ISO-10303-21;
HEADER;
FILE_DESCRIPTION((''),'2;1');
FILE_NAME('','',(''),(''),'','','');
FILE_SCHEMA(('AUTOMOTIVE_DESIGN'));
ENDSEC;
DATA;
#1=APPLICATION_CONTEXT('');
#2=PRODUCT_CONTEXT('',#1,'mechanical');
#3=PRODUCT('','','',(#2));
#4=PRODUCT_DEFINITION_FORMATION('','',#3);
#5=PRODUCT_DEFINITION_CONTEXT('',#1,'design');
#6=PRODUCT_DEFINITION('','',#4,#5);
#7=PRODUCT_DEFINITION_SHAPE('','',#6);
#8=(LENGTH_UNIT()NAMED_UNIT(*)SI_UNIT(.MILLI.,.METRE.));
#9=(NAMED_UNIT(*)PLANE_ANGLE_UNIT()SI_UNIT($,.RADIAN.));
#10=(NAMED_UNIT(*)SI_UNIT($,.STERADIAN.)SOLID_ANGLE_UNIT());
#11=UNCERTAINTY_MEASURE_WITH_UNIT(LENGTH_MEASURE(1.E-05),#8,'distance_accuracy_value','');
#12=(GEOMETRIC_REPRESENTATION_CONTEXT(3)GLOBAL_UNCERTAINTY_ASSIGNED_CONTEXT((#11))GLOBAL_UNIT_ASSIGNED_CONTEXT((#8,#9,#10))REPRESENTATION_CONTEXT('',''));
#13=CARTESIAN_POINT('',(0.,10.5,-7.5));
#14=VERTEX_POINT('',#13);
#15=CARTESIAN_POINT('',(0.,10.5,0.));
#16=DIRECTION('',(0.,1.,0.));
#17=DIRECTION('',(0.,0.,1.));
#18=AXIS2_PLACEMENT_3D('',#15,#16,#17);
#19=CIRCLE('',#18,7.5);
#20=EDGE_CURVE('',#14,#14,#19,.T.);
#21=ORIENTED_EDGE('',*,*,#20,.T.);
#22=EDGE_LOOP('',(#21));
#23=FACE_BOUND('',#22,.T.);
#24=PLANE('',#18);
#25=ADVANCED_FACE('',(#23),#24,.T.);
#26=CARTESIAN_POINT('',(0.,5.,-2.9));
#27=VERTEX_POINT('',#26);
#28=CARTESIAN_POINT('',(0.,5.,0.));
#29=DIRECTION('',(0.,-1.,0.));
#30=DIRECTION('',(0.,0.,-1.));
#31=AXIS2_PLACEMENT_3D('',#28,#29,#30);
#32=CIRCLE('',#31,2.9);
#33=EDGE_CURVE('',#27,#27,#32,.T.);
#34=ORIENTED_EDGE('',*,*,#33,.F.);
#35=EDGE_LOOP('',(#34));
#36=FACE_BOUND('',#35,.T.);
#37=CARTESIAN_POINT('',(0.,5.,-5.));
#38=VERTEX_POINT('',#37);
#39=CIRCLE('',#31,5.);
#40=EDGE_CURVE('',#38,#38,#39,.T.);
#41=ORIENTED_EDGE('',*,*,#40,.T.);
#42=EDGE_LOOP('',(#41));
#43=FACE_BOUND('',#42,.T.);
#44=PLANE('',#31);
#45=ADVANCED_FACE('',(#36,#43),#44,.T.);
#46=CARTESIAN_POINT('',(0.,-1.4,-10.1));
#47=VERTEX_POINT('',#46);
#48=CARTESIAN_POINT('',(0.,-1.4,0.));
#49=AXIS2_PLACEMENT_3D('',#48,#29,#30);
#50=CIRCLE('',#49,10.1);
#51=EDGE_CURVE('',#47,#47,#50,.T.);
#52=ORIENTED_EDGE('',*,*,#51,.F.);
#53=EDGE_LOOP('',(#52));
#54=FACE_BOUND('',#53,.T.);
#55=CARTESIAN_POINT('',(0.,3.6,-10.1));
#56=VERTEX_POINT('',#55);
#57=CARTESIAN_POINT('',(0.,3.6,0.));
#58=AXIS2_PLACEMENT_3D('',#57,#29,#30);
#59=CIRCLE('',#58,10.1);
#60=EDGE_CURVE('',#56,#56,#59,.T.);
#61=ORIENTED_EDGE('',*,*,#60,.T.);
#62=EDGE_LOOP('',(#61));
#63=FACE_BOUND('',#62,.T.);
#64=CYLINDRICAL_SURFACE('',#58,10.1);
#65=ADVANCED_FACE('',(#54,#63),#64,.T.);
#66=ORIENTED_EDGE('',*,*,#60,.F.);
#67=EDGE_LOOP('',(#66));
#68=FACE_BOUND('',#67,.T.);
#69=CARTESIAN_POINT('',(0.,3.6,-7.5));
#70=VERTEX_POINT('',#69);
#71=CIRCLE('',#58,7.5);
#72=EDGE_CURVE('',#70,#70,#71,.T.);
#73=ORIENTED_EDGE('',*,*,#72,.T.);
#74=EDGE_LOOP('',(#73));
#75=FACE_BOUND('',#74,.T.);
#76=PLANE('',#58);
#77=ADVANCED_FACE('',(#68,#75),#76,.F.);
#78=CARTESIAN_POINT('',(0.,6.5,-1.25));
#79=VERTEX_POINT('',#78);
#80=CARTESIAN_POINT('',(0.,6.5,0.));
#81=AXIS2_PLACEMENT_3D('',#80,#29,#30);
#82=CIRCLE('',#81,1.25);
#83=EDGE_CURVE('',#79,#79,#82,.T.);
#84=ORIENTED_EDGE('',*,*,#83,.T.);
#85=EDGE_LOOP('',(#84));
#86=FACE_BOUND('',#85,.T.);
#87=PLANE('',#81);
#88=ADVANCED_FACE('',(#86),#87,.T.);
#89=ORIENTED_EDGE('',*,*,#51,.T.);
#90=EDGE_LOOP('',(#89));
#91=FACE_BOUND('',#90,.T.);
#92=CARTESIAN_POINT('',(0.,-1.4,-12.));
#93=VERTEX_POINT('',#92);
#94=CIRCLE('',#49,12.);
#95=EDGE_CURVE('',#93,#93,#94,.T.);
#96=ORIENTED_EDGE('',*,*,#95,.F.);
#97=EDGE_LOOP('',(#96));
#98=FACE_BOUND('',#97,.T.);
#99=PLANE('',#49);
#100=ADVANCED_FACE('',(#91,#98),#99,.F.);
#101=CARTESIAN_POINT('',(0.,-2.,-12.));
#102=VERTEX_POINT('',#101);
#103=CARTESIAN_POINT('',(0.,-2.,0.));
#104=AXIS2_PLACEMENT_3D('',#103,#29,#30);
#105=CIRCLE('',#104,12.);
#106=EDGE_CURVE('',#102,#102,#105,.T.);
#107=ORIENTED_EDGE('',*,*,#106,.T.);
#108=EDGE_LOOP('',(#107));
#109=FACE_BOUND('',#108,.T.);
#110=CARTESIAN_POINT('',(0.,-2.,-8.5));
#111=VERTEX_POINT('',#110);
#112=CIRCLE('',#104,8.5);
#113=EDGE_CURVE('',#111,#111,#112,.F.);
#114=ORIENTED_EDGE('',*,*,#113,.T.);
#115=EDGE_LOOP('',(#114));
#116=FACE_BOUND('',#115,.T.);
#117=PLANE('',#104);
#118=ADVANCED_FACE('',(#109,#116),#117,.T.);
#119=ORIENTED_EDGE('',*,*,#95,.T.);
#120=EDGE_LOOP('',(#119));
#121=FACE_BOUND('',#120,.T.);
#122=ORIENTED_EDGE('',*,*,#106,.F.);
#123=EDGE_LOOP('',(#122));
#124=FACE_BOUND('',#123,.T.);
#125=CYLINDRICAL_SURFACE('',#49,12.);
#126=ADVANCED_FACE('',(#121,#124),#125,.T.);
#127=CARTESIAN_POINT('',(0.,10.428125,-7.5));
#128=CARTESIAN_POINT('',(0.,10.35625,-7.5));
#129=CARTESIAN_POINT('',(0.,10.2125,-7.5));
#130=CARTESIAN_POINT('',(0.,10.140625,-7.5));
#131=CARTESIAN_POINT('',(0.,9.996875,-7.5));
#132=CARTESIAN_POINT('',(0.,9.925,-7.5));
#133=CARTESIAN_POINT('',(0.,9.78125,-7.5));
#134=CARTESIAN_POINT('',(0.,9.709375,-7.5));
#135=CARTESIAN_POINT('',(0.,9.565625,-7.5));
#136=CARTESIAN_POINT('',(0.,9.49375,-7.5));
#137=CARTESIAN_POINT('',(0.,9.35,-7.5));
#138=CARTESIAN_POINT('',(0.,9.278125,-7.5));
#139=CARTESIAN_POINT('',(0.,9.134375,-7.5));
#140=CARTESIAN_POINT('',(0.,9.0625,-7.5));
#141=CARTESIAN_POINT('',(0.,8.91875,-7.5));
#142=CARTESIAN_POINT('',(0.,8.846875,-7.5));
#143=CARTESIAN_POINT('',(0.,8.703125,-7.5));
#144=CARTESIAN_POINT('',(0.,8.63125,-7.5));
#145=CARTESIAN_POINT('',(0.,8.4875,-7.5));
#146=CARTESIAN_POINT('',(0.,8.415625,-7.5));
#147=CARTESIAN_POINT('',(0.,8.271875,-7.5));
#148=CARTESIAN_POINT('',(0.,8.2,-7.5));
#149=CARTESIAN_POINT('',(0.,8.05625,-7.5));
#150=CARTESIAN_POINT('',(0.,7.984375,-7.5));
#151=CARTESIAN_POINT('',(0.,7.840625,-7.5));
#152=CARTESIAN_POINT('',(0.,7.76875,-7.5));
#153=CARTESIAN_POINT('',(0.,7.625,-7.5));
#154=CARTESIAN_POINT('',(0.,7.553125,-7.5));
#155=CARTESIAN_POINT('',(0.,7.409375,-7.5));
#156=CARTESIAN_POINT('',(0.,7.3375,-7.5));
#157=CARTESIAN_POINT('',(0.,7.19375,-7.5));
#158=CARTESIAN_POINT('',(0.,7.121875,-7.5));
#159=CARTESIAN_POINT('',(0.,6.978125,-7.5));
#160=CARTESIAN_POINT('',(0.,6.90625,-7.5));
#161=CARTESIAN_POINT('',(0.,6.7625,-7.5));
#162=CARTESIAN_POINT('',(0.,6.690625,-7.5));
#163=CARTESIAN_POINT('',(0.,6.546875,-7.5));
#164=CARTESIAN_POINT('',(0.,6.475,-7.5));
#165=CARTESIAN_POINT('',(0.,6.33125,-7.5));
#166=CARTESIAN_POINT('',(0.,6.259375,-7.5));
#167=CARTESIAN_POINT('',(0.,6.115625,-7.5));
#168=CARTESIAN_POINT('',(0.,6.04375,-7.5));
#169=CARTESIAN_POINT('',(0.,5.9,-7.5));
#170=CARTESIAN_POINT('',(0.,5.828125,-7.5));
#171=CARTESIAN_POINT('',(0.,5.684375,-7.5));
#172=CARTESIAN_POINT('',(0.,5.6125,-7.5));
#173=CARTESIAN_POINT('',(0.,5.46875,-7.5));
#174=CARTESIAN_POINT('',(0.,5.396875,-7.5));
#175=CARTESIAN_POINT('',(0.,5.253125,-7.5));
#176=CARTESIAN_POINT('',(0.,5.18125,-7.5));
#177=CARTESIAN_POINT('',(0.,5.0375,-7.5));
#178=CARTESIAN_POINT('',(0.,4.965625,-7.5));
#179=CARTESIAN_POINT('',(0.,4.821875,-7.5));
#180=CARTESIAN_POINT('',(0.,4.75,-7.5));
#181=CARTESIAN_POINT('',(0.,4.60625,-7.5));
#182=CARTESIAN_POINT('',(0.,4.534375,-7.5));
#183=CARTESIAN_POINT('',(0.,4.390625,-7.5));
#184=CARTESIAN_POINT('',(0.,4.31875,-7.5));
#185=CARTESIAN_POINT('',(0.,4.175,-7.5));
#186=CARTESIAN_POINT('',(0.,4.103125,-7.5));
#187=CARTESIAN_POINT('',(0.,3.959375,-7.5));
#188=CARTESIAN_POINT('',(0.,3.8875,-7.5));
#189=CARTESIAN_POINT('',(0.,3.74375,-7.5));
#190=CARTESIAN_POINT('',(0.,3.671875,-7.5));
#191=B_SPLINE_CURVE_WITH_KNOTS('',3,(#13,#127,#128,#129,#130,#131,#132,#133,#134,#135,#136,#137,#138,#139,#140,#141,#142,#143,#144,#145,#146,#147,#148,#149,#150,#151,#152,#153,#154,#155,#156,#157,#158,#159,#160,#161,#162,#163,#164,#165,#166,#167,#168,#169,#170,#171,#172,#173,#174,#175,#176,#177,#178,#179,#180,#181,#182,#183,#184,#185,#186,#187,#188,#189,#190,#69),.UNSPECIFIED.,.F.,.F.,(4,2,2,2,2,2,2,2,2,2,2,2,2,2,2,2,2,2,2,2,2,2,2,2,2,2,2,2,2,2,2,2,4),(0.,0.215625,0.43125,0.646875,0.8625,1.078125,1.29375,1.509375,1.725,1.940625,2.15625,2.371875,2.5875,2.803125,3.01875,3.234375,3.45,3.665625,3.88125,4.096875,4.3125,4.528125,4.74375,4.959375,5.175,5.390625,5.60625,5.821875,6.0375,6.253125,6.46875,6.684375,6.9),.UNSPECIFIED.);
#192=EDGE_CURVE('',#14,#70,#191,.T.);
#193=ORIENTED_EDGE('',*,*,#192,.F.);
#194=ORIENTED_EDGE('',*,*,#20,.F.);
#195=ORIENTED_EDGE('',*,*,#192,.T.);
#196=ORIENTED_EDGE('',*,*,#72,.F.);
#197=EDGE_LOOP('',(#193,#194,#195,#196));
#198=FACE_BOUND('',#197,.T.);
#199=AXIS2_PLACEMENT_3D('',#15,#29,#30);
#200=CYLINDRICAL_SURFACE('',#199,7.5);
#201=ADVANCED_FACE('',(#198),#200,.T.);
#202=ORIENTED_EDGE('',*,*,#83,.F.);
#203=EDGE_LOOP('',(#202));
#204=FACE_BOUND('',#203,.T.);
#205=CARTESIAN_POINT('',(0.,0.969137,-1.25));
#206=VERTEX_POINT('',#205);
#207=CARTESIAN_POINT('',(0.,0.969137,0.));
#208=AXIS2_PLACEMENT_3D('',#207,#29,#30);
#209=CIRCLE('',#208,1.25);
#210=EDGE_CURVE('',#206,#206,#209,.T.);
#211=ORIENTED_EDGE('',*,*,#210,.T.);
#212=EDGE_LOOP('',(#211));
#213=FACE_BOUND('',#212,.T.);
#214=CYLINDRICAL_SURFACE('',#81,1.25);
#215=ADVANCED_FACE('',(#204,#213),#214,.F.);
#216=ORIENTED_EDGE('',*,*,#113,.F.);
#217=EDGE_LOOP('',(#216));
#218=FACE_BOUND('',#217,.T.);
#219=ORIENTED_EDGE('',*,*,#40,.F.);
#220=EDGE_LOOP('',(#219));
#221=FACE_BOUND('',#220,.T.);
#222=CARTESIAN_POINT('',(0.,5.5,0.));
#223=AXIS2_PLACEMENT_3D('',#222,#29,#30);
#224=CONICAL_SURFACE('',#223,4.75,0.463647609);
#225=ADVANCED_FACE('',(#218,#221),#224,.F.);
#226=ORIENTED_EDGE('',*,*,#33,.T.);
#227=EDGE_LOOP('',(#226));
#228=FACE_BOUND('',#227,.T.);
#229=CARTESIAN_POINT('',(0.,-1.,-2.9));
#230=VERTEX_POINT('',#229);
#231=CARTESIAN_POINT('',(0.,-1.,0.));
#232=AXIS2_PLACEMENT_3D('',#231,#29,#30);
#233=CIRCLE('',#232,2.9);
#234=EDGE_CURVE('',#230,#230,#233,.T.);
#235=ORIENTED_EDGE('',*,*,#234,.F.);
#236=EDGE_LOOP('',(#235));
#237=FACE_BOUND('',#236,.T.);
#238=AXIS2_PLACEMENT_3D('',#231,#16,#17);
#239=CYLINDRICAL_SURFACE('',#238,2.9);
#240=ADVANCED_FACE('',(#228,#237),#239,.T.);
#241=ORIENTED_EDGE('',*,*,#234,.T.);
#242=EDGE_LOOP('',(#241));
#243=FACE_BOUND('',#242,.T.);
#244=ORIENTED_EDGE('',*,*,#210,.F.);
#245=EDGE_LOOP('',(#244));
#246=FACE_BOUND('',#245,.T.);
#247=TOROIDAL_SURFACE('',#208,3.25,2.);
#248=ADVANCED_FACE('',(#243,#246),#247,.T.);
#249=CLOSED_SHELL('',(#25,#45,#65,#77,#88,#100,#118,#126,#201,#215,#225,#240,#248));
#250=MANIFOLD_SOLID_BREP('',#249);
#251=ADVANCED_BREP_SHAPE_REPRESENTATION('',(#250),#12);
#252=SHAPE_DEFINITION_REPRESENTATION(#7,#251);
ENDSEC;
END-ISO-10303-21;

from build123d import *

# Parameters (mm, degrees)
ESQUISSE1_R             = 7.5
BOSS_EXTRU_1_DEPTH      = 10.5
BOSS_EXTRU_2_DEPTH      = 2
BOSS_EXTRU_2_DEPTH_BACK = 3.6
ESQUISSE2_R             = 10.1
ESQUISSE3_R             = 4.75
ENL_V_MAT_EXTRU_2_DEPTH = 6.999999999999999
ESQUISSE4_R             = 2.9
BOSS_EXTRU_3_DEPTH      = 6
CHANFREIN1_SIZE         = 3.75
CHANFREIN1_SIZE_2       = 7.5
ESQUISSE11_R            = 1.25
ENL_V_MAT_EXTRU_4_DEPTH = 7.5
ESQUISSE29_R            = 12
ESQUISSE29_R_2          = 10.1
BOSS_EXTRU_11_DEPTH     = 0.6
CONG_1_R                = 2


with BuildPart() as part:
    # Esquisse1 → Boss.-Extru.1 (new body)
    with BuildSketch(Plane(origin=(0, 0, 0), x_dir=(1, 0, 0), z_dir=(0, 1, 0))):
        with Locations(Location((0, 0, 0), (0, 0, 90))):
            Circle(ESQUISSE1_R)
    extrude(amount=BOSS_EXTRU_1_DEPTH)

    # Esquisse2 → Boss.-Extru.2 (add, two sides: drawn at the far end of the back side and taken through both)
    with BuildSketch(Plane.XZ.offset(-BOSS_EXTRU_2_DEPTH_BACK)):
        with Locations(Location((0, 0, 0), (0, 0, 270))):
            Circle(ESQUISSE2_R)
    extrude(amount=BOSS_EXTRU_2_DEPTH + BOSS_EXTRU_2_DEPTH_BACK)

    # Esquisse3 → Enlèv. mat.-Extru.2 (cut)
    with BuildSketch(Plane.XZ.offset(2)):
        with Locations(Location((0, 0, 0), (0, 0, 270))):
            Circle(ESQUISSE3_R)
    extrude(amount=-ENL_V_MAT_EXTRU_2_DEPTH, mode=Mode.SUBTRACT)

    # Esquisse4 → Boss.-Extru.3 (add)
    with BuildSketch(Plane.XZ.offset(-4.999999999999999)):
        with Locations(Location((0, 0, 0), (0, 0, 270))):
            Circle(ESQUISSE4_R)
    extrude(amount=BOSS_EXTRU_3_DEPTH)

    # Chanfrein1
    # the kernel refuses this chamfer: 7.5, 3.75 mm, written as the material it takes off along each edge
    with BuildSketch(Plane(origin=(0, -2, 0), x_dir=(-1.8e-16, 0, -1), z_dir=(-1, 0, 1.8e-16))) as chanfrein1_piece_1_section:
        Polygon((4.75 + CHANFREIN1_SIZE, 0), (4.75, -CHANFREIN1_SIZE_2), (4.75, 0), align=None)
    chanfrein1_piece_1 = revolve(axis=Axis((0, -2, 0), (0, -1, 0)), mode=Mode.PRIVATE)
    chanfrein1_piece_1 = split(chanfrein1_piece_1, bisect_by=Plane(origin=(2.06e-15, 4.999999999999999, 6.741862305399), z_dir=(0, -1, 0)), keep=Keep.TOP, mode=Mode.PRIVATE)
    add(chanfrein1_piece_1, mode=Mode.SUBTRACT)

    # Esquisse11 → Enlèv. mat.-Extru.4 (cut)
    with BuildSketch(Plane.XZ.offset(1.0000000000000009)):
        with Locations(Location((0, 0, 0), (0, 0, 270))):
            Circle(ESQUISSE11_R)
    extrude(amount=-ENL_V_MAT_EXTRU_4_DEPTH, mode=Mode.SUBTRACT)

    # Esquisse29 → Boss.-Extru.11 (add)
    with BuildSketch(Plane.XZ.offset(2)):
        with Locations(Location((0, 0, 0), (0, 0, 270))):
            Circle(ESQUISSE29_R)
        with Locations(Location((0, 0, 0), (0, 0, 270))):
            Circle(ESQUISSE29_R_2, mode=Mode.SUBTRACT)
    extrude(amount=-BOSS_EXTRU_11_DEPTH)

    # Congé1
    # the kernel refuses this fillet: 2 mm, written as the material it takes off along each edge
    with BuildSketch(Plane(origin=(0, -1.0000000000000009, 0), x_dir=(-1.8e-16, 0, -1), z_dir=(-1, 0, 1.8e-16))) as cong_1_piece_1:
        with BuildLine():
            CenterArc((3.25, -1.9691368667519222), CONG_1_R, 100.07865810778567, 79.92134189221433)
            Line((1.25, -1.9691368667519222), (1.21, -1.9691368667519222))
            Line((1.21, -1.9691368667519222), (1.21, 0))
            Line((1.21, 0), (1.25, 0.04000000000000004))
            ThreePointArc((1.25, 0.04000000000000004), (2.0750000000000344, 0.04000000000000004), (2.89300000000007, 0.03938273733464226))
            Line((2.89300000000007, 0.03938273733464226), (2.9000000000000687, -3.8836e-13))
        make_face()
    revolve(axis=Axis((0, -1.0000000000000009, 0), (0, -1, 0)), mode=Mode.SUBTRACT)


solid = part.part
